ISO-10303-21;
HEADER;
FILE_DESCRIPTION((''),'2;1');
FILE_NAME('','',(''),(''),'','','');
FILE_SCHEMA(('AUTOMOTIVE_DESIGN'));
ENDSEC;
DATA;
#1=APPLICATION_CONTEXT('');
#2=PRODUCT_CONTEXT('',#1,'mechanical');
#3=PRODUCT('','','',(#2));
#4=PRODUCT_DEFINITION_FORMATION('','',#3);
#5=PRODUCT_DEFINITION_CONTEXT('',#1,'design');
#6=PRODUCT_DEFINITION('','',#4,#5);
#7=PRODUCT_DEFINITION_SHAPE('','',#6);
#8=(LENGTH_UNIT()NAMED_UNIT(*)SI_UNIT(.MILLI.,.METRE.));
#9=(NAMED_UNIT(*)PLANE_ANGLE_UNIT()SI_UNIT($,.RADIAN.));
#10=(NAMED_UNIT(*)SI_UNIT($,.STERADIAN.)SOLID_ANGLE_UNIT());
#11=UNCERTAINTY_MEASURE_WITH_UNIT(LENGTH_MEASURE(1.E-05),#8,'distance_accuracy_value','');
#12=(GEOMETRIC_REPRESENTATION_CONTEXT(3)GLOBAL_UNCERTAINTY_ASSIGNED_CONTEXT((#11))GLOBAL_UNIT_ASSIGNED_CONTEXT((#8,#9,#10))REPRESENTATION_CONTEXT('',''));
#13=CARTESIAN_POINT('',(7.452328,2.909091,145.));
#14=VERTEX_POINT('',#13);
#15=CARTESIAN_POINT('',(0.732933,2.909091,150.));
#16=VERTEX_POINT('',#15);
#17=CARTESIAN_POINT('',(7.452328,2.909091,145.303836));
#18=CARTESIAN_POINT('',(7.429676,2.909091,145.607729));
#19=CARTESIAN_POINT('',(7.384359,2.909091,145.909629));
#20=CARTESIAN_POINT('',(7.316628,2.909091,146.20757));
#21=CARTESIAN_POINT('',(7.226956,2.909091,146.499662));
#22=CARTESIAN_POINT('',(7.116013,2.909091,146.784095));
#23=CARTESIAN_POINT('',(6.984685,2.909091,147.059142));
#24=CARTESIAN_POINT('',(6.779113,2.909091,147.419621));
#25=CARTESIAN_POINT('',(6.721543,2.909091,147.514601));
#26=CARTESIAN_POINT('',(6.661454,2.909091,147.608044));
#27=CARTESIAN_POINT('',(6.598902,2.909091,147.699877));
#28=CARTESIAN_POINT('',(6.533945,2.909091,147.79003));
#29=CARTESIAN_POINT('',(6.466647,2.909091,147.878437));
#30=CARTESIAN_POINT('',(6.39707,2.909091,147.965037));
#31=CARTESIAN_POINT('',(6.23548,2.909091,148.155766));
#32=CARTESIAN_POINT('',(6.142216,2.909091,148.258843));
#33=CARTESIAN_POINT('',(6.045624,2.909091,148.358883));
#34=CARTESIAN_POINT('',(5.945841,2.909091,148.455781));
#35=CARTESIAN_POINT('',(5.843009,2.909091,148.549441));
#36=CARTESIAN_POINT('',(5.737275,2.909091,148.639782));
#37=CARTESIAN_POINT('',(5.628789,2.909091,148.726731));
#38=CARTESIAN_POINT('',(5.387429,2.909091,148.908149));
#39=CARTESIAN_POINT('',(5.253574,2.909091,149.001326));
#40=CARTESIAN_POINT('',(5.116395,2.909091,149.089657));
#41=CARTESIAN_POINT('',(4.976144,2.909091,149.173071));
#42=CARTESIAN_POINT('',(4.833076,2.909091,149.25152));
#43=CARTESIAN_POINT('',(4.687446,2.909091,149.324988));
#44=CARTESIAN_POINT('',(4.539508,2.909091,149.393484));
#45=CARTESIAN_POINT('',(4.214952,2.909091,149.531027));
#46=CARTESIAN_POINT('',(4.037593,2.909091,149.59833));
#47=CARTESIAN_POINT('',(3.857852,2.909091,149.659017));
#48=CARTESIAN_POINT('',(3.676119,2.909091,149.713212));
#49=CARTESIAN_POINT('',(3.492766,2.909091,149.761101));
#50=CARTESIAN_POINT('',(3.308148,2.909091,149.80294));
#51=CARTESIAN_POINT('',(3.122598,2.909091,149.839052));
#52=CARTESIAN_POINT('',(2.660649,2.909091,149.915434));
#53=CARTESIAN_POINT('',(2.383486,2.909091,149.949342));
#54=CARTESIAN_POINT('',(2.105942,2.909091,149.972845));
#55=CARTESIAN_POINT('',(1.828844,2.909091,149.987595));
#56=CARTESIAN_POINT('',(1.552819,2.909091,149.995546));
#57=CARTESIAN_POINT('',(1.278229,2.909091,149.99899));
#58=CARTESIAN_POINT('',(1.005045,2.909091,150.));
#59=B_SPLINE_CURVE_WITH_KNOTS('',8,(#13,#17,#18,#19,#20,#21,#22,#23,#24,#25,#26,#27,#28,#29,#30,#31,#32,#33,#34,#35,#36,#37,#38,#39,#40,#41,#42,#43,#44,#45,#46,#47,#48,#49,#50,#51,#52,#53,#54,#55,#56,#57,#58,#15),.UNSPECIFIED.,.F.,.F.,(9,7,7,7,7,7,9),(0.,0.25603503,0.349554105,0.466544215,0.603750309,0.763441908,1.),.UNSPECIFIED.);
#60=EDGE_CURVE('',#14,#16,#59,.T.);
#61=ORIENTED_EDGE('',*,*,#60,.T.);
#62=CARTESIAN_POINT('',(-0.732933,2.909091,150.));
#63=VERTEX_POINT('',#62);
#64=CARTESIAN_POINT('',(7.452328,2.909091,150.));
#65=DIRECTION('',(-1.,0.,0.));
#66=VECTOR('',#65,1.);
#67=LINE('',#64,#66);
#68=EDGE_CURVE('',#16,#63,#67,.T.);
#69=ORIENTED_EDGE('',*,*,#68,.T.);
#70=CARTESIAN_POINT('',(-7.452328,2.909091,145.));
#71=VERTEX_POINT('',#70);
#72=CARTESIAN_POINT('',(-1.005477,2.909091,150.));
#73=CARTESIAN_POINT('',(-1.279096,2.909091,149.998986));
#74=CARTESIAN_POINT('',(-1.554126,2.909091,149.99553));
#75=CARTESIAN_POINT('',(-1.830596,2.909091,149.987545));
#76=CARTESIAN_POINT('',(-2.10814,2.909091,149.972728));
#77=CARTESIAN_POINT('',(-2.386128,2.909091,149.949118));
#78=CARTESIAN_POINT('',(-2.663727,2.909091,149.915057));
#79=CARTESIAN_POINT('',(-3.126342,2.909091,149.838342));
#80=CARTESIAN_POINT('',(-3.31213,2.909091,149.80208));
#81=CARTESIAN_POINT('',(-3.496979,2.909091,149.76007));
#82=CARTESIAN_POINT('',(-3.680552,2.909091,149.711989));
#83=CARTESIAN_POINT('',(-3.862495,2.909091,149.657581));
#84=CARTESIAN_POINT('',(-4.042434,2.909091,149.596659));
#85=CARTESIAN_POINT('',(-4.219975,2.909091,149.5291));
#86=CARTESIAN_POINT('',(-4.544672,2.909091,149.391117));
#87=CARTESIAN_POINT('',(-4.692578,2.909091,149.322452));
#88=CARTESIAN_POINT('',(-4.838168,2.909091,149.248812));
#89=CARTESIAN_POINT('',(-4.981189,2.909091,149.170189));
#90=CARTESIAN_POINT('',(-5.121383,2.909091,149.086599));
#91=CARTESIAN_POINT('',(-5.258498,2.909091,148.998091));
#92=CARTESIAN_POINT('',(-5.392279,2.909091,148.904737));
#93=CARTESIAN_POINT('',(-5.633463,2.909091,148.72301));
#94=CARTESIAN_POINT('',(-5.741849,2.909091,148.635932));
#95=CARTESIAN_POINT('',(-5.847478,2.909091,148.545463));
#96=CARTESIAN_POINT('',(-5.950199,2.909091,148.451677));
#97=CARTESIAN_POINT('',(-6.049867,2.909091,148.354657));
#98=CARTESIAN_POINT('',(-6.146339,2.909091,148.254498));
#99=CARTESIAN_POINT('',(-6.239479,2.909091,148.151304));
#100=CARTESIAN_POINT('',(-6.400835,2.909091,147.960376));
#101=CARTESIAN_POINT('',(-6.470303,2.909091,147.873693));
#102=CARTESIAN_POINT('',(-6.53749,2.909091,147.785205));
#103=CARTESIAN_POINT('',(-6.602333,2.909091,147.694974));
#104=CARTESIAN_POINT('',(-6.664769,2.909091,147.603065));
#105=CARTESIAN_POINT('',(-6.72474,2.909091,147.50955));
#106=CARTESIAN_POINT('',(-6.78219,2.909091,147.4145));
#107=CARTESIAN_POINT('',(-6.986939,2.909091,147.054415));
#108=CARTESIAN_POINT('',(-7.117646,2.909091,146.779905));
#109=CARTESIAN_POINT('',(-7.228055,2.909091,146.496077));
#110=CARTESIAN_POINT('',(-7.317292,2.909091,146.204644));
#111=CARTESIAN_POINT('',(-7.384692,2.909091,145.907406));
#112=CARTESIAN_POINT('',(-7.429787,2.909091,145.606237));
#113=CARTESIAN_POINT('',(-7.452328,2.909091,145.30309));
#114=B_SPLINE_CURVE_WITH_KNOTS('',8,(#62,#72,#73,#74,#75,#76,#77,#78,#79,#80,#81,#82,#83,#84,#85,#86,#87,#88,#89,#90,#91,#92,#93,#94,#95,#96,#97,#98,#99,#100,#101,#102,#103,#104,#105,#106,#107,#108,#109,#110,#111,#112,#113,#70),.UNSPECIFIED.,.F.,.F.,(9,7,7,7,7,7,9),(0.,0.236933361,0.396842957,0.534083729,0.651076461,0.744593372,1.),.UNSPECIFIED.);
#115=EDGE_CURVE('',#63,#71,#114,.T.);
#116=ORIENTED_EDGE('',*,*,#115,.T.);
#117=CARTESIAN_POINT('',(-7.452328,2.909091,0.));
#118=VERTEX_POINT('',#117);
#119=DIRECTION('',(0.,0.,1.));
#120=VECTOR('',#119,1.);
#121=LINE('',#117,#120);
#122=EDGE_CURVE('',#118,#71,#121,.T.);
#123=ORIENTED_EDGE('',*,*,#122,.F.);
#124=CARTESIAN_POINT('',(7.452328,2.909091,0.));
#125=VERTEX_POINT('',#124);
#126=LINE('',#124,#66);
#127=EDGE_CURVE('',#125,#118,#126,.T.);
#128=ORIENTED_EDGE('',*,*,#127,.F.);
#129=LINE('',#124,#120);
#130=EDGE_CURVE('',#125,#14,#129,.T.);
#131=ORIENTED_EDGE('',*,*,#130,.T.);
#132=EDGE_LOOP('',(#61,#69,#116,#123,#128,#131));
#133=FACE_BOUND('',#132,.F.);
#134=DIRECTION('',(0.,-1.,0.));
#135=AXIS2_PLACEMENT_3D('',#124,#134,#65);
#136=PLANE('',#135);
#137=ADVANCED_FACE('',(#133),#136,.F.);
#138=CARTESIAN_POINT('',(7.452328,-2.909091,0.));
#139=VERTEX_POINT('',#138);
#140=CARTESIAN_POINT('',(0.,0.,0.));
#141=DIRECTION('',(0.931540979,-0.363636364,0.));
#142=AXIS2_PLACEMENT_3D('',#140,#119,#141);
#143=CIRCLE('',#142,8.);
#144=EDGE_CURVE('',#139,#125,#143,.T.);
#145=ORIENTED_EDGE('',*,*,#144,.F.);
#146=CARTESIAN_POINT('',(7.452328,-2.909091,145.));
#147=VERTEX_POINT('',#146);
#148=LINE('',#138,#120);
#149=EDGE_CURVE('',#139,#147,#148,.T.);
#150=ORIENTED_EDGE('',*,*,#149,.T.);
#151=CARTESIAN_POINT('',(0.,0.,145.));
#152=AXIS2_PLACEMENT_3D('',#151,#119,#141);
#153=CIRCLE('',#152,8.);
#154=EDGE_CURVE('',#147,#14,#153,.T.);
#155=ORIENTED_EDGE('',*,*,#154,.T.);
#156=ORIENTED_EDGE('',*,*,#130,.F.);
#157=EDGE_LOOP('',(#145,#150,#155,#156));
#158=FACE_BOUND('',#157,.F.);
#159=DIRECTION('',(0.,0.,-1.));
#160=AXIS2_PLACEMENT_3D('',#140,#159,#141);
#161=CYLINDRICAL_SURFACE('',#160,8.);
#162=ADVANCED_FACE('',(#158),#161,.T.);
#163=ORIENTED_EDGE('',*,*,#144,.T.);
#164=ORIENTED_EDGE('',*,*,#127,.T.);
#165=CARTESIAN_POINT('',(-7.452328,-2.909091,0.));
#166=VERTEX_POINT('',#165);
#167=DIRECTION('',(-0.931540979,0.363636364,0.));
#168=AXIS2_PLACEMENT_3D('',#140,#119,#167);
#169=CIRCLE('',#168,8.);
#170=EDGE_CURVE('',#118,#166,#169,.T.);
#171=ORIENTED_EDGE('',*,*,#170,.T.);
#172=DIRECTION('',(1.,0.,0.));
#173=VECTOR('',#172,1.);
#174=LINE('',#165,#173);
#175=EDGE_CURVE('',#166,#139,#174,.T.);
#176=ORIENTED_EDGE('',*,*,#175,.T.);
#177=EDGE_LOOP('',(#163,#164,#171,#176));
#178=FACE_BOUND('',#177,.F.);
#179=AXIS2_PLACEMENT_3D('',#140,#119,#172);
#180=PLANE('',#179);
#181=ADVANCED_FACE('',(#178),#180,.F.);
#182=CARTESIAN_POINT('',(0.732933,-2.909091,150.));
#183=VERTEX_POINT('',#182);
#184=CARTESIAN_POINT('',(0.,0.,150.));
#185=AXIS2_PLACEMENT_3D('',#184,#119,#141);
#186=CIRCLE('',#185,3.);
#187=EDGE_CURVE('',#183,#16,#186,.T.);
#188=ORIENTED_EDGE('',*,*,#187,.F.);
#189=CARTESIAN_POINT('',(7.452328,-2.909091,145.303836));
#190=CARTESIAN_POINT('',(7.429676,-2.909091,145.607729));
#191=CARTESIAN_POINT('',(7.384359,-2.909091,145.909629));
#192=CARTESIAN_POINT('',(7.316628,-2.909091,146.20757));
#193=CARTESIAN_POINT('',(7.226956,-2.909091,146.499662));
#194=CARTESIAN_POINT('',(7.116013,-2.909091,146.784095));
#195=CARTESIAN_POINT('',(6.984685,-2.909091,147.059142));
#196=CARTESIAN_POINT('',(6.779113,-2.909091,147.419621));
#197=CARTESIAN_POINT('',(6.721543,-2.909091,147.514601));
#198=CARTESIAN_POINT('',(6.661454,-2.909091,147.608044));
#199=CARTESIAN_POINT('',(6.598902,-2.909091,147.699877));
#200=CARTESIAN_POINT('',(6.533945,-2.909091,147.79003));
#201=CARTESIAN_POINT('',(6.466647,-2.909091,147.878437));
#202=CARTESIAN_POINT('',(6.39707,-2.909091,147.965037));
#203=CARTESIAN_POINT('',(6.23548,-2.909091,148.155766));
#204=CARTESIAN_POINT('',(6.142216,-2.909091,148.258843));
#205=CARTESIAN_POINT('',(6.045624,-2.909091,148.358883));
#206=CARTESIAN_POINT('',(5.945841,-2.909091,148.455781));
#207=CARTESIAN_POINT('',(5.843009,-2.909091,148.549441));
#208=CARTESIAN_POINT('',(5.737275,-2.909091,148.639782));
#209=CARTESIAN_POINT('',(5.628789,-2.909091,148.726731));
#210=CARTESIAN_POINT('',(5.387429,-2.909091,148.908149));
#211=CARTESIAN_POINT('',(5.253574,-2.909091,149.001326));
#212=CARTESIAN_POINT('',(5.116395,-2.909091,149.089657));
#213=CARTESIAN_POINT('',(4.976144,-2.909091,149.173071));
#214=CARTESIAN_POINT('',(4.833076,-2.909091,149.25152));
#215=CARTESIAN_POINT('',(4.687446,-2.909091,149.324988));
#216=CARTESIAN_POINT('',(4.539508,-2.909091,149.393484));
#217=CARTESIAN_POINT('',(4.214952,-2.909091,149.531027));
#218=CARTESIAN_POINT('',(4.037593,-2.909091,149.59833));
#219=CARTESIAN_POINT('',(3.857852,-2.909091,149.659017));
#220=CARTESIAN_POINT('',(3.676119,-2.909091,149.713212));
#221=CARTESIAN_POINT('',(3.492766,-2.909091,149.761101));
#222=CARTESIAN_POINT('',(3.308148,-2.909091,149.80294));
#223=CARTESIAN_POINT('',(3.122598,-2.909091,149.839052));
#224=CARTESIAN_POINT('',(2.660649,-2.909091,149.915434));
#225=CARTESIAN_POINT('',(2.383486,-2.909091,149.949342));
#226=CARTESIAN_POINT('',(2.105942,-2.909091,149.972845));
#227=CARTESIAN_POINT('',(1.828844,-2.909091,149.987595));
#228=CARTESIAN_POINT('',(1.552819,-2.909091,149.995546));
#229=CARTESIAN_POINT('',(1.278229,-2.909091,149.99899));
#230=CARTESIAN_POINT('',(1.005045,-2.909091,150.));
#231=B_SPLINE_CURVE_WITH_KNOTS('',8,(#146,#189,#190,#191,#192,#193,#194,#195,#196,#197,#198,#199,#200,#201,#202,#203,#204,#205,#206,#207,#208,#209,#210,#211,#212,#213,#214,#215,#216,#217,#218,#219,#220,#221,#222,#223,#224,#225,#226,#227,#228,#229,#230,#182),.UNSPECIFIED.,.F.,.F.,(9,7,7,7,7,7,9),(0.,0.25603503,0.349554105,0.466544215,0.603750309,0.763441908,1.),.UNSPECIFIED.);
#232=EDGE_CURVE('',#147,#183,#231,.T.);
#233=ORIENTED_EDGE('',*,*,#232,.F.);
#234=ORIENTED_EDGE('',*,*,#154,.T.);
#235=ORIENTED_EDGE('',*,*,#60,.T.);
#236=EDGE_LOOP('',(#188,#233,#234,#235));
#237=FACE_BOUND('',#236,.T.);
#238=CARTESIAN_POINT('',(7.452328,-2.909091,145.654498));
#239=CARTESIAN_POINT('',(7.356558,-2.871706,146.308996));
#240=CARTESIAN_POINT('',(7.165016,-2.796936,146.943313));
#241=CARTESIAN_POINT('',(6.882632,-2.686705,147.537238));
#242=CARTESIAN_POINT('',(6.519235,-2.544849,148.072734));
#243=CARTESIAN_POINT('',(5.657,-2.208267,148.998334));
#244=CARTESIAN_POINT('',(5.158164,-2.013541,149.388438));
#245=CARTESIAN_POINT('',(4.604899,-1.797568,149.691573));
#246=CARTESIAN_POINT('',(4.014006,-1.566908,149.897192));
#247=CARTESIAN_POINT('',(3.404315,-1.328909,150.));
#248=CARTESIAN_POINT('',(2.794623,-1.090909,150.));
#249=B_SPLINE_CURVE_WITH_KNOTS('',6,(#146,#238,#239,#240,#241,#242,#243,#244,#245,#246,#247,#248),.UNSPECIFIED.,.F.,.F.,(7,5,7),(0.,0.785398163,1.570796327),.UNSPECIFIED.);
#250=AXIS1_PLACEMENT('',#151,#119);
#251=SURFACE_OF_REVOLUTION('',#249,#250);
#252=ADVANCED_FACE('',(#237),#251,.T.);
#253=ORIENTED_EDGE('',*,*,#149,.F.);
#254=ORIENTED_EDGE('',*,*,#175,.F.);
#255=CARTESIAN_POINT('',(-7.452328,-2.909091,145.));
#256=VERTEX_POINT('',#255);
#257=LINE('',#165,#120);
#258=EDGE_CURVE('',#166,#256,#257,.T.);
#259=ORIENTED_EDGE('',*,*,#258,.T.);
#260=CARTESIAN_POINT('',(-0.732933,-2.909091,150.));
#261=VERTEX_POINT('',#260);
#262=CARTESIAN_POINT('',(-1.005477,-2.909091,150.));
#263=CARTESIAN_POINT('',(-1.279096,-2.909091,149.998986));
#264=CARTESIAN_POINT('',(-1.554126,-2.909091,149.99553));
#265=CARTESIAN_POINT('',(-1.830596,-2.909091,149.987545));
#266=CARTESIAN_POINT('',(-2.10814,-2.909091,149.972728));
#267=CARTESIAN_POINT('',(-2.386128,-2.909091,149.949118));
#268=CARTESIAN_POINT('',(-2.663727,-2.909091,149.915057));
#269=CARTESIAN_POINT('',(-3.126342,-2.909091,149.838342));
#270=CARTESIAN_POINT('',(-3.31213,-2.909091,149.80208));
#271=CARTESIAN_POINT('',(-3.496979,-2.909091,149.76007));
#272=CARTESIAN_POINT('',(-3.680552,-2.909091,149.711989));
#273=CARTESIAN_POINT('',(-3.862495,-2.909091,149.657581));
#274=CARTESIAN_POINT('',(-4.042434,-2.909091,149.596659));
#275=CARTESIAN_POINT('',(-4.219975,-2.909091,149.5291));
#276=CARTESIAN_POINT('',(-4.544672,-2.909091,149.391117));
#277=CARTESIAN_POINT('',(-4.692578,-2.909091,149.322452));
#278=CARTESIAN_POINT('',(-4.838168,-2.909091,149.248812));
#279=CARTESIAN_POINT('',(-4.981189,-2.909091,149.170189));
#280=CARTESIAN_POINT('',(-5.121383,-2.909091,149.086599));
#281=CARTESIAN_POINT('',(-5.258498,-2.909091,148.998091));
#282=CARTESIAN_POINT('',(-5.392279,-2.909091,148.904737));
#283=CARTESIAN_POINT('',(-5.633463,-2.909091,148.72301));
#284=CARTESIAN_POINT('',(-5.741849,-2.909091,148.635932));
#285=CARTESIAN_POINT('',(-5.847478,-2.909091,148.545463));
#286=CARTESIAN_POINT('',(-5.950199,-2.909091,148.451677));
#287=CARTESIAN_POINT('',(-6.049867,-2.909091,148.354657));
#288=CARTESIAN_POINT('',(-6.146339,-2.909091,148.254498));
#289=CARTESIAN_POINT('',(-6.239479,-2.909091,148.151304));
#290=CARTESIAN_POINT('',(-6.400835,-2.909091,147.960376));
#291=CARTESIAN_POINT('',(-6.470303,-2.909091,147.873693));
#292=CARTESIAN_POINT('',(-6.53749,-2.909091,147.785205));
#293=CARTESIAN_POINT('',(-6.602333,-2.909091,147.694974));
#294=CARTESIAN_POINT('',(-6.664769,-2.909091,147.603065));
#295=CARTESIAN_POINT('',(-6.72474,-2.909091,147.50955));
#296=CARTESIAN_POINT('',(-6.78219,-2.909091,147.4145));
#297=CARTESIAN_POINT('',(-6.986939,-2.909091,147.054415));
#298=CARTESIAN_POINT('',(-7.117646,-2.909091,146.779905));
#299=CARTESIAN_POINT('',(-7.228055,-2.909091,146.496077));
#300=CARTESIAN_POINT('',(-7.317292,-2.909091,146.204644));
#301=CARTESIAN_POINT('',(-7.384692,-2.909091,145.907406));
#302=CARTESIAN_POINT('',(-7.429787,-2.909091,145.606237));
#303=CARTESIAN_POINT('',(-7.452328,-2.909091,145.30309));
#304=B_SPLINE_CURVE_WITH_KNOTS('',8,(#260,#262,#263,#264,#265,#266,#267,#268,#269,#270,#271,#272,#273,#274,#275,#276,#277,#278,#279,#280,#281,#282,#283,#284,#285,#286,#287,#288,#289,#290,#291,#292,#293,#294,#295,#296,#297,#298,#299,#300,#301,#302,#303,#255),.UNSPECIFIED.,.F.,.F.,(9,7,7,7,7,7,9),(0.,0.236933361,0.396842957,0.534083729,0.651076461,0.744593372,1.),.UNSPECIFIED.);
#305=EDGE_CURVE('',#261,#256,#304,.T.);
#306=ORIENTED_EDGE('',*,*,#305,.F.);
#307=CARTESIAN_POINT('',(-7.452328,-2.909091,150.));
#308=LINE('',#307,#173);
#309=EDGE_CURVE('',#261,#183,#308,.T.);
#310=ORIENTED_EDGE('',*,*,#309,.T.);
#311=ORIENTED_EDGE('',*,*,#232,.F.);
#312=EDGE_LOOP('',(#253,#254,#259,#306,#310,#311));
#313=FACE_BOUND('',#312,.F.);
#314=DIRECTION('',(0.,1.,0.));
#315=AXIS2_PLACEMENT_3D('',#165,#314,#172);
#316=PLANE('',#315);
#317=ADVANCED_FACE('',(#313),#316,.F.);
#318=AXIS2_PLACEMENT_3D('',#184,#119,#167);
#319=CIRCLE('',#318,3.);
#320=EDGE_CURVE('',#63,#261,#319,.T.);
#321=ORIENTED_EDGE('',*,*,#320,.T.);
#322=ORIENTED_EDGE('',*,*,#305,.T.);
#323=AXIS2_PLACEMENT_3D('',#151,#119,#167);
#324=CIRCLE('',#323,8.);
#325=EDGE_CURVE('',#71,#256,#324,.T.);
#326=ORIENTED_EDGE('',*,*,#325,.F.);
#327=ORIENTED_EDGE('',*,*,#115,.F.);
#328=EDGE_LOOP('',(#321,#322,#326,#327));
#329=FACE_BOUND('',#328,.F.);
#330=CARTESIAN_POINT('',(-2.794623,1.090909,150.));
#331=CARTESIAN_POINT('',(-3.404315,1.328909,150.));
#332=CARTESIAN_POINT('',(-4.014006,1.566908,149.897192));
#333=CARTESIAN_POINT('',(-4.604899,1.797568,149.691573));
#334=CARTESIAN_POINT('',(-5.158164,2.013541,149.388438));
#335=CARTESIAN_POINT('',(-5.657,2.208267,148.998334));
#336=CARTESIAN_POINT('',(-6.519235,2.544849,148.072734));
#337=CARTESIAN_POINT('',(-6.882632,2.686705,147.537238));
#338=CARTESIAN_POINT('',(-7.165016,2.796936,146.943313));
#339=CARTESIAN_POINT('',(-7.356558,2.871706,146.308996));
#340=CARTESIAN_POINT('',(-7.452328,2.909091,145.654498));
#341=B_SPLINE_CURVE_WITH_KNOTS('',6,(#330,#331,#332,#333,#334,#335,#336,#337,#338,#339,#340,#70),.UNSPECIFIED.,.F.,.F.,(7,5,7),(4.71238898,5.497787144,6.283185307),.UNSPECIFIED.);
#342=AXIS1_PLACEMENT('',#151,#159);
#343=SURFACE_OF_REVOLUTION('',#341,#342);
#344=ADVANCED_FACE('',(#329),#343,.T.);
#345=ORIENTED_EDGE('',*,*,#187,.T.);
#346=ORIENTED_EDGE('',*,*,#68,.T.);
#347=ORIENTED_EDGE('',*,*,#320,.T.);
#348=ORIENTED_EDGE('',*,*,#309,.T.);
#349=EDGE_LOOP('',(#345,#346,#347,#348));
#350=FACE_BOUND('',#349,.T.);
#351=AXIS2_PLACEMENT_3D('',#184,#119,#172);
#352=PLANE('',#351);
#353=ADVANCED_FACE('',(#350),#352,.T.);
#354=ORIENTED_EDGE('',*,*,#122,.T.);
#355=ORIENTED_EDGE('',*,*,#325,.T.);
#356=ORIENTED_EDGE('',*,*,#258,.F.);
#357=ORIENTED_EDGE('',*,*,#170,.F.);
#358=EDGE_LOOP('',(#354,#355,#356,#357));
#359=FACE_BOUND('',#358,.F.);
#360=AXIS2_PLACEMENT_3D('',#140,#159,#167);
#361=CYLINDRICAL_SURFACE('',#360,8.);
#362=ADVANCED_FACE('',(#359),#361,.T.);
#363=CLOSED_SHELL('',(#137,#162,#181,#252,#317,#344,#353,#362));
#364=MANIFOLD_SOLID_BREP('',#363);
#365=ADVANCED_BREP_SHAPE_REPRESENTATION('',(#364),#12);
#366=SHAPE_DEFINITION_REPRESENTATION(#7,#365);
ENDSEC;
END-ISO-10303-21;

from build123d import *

# Parameters (mm, degrees)
F1_DEPTH = 150
F2_R     = 5
F3_R     = 5


# Not quite as in the source:
# - a feature names something its author has since deleted; it is built from what else it names


with BuildPart() as f1:
    # F0 (on Top) → F1 (new body)
    with BuildSketch(Plane.XY):
        with BuildLine():
            Line((7.4523278298, 2.9090909091), (-7.4523278298, 2.9090909091))
            ThreePointArc((-7.4523278298, 2.9090909091), (-8, 0), (-7.4523278298, -2.9090909091))
            Line((-7.4523278298, -2.9090909091), (7.4523278298, -2.9090909091))
            ThreePointArc((7.4523278298, -2.9090909091), (8, 0), (7.4523278298, 2.9090909091))
        make_face()
    extrude(amount=F1_DEPTH)

    # F2
    f2_edges = [f1.edges().sort_by_distance(p)[0] for p in [
        (8, 0, 150),
    ]]
    fillet(f2_edges, radius=F2_R)

    # F3
    f3_edges = [f1.edges().sort_by_distance(p)[0] for p in [
        (-8, 0, 150),
    ]]
    fillet(f3_edges, radius=F3_R)


solid = f1.part
